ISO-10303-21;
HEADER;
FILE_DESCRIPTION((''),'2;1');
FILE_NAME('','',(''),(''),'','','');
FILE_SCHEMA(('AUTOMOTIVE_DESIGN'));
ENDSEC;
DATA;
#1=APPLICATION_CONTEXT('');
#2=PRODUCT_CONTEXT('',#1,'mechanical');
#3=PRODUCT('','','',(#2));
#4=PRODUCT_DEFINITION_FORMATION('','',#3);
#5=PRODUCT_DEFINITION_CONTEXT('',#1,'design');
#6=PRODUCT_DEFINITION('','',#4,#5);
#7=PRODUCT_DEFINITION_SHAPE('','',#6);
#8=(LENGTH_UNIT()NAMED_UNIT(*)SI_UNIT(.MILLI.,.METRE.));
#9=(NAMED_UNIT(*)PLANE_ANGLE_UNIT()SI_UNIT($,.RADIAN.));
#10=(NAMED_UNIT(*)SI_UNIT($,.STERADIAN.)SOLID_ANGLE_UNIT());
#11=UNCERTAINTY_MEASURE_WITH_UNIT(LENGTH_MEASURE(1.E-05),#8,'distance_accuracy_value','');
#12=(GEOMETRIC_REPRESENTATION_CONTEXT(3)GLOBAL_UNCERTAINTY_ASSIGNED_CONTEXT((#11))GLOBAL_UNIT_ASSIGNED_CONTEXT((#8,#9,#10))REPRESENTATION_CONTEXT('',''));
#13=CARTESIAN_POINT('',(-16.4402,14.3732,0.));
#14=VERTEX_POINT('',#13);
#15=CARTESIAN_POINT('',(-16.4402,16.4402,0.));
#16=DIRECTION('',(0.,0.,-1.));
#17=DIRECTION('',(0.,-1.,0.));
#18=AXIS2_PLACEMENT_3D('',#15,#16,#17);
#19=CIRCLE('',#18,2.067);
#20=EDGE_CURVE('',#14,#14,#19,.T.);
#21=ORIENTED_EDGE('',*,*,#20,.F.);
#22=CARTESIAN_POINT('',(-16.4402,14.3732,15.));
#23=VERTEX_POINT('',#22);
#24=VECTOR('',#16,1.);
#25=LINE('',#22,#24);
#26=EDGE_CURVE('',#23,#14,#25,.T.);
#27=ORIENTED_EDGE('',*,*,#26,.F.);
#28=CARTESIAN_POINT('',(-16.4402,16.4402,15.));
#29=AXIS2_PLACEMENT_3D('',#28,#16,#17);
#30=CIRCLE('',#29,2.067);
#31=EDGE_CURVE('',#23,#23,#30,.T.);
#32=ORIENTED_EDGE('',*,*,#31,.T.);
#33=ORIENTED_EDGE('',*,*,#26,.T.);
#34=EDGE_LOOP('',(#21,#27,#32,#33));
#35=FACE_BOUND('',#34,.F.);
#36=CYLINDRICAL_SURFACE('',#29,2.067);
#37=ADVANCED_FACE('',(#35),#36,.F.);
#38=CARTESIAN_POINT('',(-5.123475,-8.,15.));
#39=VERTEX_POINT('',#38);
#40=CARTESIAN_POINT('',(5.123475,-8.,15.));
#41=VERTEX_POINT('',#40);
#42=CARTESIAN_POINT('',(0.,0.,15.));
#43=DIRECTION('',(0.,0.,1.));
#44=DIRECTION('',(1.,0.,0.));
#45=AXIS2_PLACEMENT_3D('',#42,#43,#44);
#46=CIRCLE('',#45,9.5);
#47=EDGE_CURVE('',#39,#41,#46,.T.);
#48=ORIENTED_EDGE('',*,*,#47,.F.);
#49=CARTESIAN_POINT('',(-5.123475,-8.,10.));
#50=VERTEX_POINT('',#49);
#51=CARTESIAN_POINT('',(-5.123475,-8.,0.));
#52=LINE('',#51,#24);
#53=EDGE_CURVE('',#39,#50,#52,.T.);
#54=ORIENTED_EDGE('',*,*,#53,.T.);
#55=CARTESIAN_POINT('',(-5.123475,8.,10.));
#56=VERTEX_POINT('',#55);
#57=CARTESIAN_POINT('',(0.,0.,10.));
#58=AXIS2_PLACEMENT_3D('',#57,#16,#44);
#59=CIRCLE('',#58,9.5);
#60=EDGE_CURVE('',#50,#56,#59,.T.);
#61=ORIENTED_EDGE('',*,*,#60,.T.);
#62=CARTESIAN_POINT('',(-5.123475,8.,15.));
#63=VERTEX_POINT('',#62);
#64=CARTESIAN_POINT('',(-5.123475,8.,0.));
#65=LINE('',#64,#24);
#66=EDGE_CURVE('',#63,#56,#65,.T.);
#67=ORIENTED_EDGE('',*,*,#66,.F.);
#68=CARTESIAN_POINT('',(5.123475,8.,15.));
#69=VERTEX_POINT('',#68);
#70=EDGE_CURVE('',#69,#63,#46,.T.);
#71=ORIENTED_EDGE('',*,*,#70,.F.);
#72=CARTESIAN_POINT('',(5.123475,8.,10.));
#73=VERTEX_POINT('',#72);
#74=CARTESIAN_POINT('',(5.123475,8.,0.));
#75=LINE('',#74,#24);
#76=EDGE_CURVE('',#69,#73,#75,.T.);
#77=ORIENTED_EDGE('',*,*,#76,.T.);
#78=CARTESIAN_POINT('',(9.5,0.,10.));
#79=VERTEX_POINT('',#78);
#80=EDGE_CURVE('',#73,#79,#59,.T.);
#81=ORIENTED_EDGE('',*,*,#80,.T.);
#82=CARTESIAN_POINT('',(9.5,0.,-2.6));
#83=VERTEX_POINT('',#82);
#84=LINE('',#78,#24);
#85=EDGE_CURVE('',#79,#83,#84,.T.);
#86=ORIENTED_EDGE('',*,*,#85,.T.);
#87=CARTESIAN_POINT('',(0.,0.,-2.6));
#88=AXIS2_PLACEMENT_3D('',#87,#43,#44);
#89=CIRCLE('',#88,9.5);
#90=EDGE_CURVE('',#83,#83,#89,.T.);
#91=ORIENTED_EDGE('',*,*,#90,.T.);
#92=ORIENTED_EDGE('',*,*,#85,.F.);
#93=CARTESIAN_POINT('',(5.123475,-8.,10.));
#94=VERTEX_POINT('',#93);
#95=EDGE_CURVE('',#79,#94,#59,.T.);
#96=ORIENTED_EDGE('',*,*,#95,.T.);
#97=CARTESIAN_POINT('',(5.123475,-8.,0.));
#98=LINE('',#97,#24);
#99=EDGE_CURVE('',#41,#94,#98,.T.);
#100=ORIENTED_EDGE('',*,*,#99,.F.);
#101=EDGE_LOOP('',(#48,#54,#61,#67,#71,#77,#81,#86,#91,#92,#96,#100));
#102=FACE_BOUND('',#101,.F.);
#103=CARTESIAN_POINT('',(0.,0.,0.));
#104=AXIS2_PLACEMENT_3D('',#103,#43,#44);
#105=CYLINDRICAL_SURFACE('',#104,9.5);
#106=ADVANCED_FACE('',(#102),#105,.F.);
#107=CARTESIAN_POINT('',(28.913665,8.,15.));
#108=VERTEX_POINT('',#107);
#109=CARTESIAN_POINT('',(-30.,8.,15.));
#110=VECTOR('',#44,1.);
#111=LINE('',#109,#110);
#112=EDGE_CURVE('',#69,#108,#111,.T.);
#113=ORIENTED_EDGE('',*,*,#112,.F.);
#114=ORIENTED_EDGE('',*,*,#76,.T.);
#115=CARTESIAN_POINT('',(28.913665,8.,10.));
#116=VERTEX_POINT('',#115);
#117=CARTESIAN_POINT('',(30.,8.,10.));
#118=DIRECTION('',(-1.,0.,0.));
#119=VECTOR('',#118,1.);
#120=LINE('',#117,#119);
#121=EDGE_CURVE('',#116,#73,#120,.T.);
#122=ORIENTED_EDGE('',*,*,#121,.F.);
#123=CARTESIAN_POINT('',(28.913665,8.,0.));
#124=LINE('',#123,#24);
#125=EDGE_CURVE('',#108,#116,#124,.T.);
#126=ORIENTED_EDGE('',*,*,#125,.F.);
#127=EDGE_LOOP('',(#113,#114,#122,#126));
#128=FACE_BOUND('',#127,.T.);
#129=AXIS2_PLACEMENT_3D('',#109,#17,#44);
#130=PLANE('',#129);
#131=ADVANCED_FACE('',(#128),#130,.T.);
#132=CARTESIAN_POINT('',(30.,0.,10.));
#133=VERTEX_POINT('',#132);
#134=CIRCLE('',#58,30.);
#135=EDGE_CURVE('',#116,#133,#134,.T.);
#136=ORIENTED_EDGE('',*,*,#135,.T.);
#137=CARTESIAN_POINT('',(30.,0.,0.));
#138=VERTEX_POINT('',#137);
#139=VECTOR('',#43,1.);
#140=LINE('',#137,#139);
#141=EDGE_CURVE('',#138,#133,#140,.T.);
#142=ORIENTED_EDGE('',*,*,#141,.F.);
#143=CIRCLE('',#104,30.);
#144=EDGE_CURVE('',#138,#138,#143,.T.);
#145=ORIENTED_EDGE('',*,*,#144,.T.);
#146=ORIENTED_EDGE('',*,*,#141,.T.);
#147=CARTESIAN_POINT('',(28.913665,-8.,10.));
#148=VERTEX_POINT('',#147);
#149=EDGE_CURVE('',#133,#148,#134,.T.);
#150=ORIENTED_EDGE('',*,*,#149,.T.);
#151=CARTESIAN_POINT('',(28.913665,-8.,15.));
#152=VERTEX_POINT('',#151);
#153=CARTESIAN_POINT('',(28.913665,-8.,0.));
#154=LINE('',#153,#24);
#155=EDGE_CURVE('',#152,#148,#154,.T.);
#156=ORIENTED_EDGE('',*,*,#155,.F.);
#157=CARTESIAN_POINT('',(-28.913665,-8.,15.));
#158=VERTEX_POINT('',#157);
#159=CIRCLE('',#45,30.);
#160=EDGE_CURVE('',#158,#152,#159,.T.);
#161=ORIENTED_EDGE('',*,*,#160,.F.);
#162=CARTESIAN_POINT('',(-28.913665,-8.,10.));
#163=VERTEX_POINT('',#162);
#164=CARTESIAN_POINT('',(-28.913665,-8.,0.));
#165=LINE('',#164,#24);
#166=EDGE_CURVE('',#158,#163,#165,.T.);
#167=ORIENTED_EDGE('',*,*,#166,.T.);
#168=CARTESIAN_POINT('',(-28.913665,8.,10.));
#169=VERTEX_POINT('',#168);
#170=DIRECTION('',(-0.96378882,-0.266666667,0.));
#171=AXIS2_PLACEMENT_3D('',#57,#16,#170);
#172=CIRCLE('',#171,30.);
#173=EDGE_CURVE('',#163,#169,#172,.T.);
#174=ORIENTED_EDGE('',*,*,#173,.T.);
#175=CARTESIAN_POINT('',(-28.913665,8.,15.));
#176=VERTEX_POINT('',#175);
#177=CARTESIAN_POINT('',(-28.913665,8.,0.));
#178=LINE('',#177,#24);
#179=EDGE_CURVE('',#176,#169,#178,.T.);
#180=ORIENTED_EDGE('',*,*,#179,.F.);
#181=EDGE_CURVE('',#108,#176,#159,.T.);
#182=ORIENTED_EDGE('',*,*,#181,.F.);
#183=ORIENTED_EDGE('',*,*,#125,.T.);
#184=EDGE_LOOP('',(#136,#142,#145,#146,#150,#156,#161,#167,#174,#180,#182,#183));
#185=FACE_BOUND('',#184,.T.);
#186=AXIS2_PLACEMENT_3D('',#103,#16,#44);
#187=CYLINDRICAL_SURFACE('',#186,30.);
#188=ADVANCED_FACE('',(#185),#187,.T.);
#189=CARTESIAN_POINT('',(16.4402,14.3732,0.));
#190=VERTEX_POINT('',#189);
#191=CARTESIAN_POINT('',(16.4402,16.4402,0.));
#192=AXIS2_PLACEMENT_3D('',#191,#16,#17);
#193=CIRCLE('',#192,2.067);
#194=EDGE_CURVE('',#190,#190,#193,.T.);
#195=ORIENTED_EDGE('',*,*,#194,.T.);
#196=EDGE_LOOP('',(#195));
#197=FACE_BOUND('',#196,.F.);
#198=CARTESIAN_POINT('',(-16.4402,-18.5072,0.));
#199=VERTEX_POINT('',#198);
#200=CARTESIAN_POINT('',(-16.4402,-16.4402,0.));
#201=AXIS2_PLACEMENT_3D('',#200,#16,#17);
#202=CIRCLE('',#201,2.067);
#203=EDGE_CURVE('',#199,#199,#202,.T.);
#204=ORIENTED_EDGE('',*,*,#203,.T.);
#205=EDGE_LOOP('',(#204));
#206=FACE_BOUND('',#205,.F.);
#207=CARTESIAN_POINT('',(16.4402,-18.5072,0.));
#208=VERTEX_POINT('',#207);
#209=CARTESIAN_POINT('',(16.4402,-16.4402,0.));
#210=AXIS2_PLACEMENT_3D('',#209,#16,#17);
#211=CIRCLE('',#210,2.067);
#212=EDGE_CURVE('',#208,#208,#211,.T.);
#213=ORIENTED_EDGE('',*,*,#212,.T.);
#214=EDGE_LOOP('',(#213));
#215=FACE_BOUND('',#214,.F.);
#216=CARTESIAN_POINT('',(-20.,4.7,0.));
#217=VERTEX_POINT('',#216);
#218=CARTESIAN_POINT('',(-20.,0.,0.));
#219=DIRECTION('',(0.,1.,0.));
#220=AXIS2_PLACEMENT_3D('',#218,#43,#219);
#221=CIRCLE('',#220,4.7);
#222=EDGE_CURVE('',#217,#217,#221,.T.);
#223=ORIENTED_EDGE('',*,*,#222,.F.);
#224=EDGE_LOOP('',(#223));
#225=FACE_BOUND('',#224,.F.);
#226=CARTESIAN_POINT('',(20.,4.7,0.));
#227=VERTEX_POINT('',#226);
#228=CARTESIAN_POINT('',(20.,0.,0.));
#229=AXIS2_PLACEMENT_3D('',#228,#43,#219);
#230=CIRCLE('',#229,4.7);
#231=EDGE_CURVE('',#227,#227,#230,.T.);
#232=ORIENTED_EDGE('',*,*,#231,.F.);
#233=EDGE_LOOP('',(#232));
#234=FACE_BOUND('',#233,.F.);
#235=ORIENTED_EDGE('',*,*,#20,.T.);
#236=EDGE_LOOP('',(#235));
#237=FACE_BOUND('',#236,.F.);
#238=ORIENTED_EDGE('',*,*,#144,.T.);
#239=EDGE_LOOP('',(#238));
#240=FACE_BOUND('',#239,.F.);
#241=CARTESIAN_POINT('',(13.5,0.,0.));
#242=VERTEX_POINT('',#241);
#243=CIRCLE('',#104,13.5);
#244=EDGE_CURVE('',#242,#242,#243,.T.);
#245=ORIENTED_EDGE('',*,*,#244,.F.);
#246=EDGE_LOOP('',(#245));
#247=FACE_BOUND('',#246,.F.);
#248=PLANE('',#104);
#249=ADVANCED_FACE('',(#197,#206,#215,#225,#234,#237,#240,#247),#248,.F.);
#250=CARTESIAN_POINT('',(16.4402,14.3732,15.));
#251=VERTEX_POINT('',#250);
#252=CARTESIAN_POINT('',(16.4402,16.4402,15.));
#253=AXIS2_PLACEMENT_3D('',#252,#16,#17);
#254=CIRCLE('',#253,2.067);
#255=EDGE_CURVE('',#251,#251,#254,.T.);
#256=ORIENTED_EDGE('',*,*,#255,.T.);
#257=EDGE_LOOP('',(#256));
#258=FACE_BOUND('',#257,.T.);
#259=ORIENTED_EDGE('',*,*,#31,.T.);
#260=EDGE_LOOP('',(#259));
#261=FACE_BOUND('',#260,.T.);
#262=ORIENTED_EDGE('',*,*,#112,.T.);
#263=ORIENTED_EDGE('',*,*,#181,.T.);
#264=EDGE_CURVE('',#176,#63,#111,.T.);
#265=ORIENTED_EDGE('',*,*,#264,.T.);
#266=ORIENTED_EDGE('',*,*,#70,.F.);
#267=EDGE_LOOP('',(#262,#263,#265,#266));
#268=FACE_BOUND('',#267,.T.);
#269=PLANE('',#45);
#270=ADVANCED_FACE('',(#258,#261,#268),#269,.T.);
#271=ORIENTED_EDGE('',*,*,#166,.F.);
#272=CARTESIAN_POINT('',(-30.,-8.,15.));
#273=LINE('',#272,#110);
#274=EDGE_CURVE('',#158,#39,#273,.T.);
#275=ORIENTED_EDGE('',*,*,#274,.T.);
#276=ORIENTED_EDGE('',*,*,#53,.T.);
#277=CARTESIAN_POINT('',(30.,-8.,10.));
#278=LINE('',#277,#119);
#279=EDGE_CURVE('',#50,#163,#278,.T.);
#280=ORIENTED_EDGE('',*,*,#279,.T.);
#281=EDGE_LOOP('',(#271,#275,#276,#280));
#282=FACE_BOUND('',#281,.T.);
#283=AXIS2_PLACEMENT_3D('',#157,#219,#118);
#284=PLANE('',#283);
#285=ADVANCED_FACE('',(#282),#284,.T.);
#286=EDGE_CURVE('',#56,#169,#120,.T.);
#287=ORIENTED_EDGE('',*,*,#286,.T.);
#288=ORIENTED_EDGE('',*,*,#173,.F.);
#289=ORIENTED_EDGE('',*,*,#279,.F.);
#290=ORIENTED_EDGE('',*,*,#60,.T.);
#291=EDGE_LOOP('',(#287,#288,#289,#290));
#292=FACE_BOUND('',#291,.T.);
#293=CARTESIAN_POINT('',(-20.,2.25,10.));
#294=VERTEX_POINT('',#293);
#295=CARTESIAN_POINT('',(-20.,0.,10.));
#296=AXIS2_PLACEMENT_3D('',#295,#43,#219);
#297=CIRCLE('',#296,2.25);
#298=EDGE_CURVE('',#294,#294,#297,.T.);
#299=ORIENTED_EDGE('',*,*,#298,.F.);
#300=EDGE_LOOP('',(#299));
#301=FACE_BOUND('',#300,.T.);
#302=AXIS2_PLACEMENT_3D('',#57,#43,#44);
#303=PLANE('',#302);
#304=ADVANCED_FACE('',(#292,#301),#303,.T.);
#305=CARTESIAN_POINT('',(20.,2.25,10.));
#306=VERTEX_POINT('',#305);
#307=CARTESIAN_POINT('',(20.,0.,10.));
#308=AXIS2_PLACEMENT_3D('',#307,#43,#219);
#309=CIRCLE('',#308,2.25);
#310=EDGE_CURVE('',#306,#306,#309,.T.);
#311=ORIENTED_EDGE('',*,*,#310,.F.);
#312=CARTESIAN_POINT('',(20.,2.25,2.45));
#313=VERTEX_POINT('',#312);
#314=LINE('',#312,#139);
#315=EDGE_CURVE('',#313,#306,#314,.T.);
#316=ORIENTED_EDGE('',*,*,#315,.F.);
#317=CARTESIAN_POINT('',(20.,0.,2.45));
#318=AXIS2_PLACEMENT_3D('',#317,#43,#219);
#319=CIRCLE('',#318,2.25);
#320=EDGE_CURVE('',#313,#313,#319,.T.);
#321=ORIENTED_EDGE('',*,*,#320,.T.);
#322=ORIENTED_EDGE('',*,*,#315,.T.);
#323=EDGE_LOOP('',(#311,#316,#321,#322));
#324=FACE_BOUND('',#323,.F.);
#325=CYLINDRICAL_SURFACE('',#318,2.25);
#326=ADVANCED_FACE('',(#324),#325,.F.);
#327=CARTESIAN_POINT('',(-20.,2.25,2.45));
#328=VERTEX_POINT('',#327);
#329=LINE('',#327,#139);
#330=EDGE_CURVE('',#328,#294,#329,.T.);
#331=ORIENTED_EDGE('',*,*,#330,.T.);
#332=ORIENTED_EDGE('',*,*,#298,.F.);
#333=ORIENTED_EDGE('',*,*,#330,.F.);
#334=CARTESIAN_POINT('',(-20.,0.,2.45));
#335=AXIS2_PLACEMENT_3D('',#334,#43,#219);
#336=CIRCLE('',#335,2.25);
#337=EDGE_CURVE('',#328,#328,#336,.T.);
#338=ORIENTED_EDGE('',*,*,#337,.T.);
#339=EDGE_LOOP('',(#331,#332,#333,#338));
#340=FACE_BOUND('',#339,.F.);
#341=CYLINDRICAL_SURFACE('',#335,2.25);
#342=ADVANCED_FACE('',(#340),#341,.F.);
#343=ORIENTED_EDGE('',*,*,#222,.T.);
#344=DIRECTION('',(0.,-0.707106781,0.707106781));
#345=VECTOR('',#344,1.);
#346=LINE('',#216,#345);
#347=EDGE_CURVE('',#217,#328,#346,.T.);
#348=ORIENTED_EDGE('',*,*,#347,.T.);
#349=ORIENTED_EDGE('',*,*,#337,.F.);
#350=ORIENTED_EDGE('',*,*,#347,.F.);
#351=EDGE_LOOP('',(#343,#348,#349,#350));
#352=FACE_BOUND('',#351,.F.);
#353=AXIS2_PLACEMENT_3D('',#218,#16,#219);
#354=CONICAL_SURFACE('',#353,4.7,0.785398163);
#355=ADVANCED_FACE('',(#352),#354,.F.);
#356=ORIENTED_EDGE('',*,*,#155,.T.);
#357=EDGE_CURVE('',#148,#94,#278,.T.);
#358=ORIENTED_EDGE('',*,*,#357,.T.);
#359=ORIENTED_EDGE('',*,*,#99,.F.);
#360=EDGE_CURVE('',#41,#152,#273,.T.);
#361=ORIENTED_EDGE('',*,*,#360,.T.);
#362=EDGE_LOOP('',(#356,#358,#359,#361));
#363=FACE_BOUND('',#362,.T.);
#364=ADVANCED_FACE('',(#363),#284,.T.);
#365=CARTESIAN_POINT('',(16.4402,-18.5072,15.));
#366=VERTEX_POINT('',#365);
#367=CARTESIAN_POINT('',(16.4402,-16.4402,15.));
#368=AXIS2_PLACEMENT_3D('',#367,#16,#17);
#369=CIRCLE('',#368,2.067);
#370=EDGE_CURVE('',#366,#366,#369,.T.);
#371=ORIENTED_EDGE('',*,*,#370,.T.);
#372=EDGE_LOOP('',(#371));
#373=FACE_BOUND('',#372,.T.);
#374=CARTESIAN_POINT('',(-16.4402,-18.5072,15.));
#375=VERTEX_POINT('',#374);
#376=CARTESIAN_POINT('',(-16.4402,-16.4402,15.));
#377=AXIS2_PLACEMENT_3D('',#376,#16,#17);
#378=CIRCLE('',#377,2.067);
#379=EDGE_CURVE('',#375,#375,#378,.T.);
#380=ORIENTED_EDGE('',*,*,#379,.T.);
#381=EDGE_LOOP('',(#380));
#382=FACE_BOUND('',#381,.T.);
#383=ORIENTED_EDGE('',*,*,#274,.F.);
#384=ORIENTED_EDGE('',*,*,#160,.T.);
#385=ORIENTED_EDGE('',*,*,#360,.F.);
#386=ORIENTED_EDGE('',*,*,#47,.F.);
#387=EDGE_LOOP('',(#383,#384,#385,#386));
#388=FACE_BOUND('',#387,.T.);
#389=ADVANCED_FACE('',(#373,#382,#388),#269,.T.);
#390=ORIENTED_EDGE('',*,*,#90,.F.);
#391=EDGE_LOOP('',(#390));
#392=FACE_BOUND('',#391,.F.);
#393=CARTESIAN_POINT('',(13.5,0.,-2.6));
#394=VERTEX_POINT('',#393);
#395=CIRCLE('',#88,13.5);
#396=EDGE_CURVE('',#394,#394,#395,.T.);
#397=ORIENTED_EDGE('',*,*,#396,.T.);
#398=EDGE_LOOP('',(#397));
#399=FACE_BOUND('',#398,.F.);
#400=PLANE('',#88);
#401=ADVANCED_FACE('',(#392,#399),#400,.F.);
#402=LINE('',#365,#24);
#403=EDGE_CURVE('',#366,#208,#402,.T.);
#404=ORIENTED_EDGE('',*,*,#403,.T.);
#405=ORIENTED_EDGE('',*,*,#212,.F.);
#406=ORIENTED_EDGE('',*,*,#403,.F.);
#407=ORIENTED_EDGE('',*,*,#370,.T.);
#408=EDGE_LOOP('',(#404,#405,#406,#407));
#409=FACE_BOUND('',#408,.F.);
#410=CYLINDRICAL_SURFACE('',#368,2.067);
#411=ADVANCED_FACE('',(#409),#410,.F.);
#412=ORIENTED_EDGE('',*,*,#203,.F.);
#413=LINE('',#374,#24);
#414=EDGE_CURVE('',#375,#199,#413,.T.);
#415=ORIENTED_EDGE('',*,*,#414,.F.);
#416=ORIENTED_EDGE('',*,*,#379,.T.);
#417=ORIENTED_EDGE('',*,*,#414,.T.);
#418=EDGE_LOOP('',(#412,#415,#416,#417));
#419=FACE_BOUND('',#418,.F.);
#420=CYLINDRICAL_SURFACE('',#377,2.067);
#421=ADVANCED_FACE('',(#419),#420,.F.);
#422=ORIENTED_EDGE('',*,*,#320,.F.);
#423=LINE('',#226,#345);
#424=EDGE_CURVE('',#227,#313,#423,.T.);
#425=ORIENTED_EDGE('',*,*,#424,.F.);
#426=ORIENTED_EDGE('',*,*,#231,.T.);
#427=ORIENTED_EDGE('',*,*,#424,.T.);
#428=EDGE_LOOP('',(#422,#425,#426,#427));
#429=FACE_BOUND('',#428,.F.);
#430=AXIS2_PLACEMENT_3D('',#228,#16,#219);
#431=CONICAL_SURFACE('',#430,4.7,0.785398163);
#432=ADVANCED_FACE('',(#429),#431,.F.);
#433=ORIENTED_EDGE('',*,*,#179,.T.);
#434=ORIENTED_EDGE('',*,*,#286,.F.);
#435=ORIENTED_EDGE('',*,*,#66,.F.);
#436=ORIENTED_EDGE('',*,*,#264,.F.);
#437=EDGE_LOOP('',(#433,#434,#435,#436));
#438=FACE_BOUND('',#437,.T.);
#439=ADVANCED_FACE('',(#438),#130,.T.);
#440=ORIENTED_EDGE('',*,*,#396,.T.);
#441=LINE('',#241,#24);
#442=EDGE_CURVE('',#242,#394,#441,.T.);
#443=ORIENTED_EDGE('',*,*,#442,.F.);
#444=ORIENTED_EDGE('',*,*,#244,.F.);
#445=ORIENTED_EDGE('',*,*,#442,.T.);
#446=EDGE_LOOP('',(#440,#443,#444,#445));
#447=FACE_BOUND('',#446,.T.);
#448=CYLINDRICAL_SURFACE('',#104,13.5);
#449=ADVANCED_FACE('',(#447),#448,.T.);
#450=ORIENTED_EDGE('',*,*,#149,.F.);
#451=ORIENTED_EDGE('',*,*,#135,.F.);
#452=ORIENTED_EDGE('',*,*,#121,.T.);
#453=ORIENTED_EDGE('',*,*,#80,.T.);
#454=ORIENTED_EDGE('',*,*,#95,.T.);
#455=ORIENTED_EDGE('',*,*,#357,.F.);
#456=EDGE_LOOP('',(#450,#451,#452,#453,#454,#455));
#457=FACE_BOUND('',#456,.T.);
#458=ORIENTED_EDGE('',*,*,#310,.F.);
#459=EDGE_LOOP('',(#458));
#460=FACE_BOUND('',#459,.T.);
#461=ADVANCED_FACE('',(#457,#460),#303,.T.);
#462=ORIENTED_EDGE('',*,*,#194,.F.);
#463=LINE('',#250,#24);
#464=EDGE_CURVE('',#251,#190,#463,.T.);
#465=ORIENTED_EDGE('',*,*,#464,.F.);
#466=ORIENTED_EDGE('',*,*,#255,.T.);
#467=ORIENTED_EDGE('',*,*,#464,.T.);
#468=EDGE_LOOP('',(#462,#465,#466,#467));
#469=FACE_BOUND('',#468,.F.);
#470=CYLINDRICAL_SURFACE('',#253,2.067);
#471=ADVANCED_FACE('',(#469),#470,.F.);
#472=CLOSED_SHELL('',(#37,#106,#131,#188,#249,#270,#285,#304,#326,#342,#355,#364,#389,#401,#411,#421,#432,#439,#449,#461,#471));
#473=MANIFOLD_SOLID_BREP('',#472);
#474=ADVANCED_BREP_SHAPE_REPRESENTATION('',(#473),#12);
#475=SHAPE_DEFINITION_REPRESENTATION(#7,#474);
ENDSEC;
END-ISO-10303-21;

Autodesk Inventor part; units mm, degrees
ref_plane "Arbeitsebene3" through (0, 0, 50) normal (0, 0, 1) x (1, 0, 0)
ref_plane "Arbeitsebene4" through (0, 0, 130) normal (0, 0, 1) x (1, 0, 0)
sketch "Skizze1" plane through (0, 0, 0) normal (0, 0, 1) x (1, 0, 0)
  circle A0 centre (0, 0) radius 30
  circle A1 centre (0, 0) radius 13.5
  circle A2 centre (0, 0) radius 9.5
  circle A3 centre (0, 0) radius 23.25 construction
  line L0 (0, 0) -> (16.4402, 16.4402) construction
  line L1 (0, 0) -> (0, 30) construction
  point P0 (-16.4402, 16.4402)
  point P1 (-16.4402, -16.4402)
  point P2 (16.4402, -16.4402)
  dimension "d3" = 30
  dimension "d4" = 46.5
  dimension "d0" = 4
  dimension "d1" = 27
  dimension "d7" = 360
  dimension "d99" = 45
extrude "Extrusion1" add sketch "Skizze1" along normal blind 15 contours A0 | A1
extrude "Extrusion2" add sketch "Skizze1" against normal blind 2.6 contours A1
sketch "Skizze2" plane through (0, 0, 15) normal (0, 0, 1) x (1, 0, 0)
  point P0 (0, 0)
  point P1 (16.4402, 16.4402)
  point P2 (16.4402, -16.4402)
  point P3 (-16.4402, -16.4402)
  point P4 (-16.4402, 16.4402)
hole "Bohrung1" at (16.4402, 16.4402, 15) at (16.4402, -16.4402, 15) at (-16.4402, -16.4402, 15) at (-16.4402, 16.4402, 15) direction (0, 0, -1) diameter 4.134 end through all thread size "M5x0.8" class "6H" standard "ISO Metric profile"
ref_plane "Arbeitsebene1" through (0, 0, 10) normal (0, 0, 1) x (1, 0, 0)
sketch "Skizze10" plane through (0, 0, 15) normal (0, 0, 1) x (1, 0, 0)
  line L0 (-30, 8) -> (30, 8)
  line L1 (30, 8) -> (30, -8)
  line L2 (30, -8) -> (-30, -8)
  line L3 (-30, -8) -> (-30, 8)
  line L4 (-30, 8) -> (30, -8) construction
  line L5 (30, 8) -> (-30, -8) construction
  circle A0 centre (0, 0) radius 30 projected
  circle A1 centre (-16.4402, 16.4402) radius 2.067 construction
  circle A2 centre (-16.4402, -16.4402) radius 2.067 construction
  line L6 (-20, 0) -> (20, 0) construction
  circle A3 centre (0, 0) radius 30 projected
  line L7 (0, 42) -> (0, -42) construction
  point P0 (-28.9137, 8)
  point P1 (-28.9137, -8)
  point P2 (28.9137, -8)
  point P3 (28.9137, 8)
  point P4 (30, 0)
  point P5 (-30, 0)
  dimension "d81" = 16
  dimension "d82" = 40
extrude "Extrusion7" cut sketch "Skizze10" against normal blind 5 contours L0 A0 L3 | L0 A0 L2 | A0 L2 L3 | L0 L1 A0 | L1 L2 A0
sketch "Skizze11" plane through (0, 0, 0) normal (0, 0, -1) x (-1, 0, 0)
  point P0 (0, 0)
  point P1 (-20, 0)
  point P2 (20, 0)
hole "Bohrung4" at (20, 0, 0) at (-20, 0, 0) direction (0, 0, 1) diameter 4.5 end through all countersink diameter 9.4 countersink angle 90 clearance for "Senkschraube mit Linsenkopf ISO 2010" size "M4" standard "DIN"
sketch "Skizze4" plane through (0, 0, 0) normal (1, 0, 0) x (0, 1, 0)
  line L0 (9.5, -2.6) -> (-9.5, -2.6) construction
  line L1 (0, 192.52) -> (0, -35.12) construction
  line L2 (-9.5, 15) -> (-9.5, -2.6) construction
  line L3 (9.5, 15) -> (9.5, -2.6) construction
  line L4 (-9.5, 15) -> (9.5, 15) construction
  line L5 (-9.5, 2.4) -> (9.5, 2.4)
  line L6 (-9.5, 2.4) -> (-9.5, 15)
  line L7 (-9.5, 15) -> (-20, 15)
  line L8 (-20, 15) -> (-20, 165)
  line L9 (-20, 165) -> (20, 165)
  line L10 (20, 15) -> (9.5, 15)
  line L11 (9.5, 15) -> (9.5, 2.4)
  line L12 (20, 165) -> (20, 15)
  line L13 (0, 2.4) -> (0, 165)
  point P0 (0, 0)
  dimension "d27" = 5
  dimension "d31" = 150
  dimension "d33" = 40
  dimension "MainAxis_Schluesselweite" = 24
  dimension "d46" = 1
  dimension "d52" = 32
  dimension "Flansch_ParralelMech_FlatPart_Width" = 140
sketch "Skizze7" plane through (0, 0, 50) normal (0, 0, 1) x (1, 0, 0)
  line L0 (-12, 16) -> (-12, -16) construction
  line L1 (-12, 15) -> (-3, 15)
  line L2 (-3, 15) -> (-3, 11.425)
  line L3 (-3, 11.425) -> (3, 11.425)
  line L4 (3, 11.425) -> (3, 15)
  line L5 (3, 15) -> (12, 15)
  line L6 (-12, 0) -> (-12, 15)
  line L7 (0, -16) -> (0, 16) construction
  line L8 (12, -16) -> (12, 16) construction
  line L9 (12, 15) -> (12, 0)
  line L10 (-12, 0) -> (12, 0)
  line L11 (-42, 0) -> (42, 0) construction
  point P0 (0, 11.425)
  point P1 (-12, -7.2111)
  point P2 (12, 7.2111)
  dimension "d51" = 9
  dimension "d63" = 30
  dimension "d64" = 22.85
sketch "Skizze8" plane through (12, -16, 160) normal (1, 0, 0) x (0, 0, -1)
  line L0 (30, -26) -> (30, 58) construction
  line L1 (-32.52, 16) -> (195.12, 16) construction
  point P0 (160, 16)
  point P1 (30, 16)
equation "\"d3\" = Flansch_FemalePart_OuterDia"
equation "\"d4\" = Flansch_FemalePart_HoleDia"
equation "\"d1\" = Flansch_Klemmdeckelausnahme_Dia"
equation "\"d33\" = d28"
equation "\"Total_Bearing_Hole_Dist\" = 80"
equation "\"Flansch_FemalePart_OuterDia\" = 30"
equation "\"Flansch_FemalePart_HoleDia\" = 46.5"
equation "\"Flansch_Klemmdeckelausnahme_Dia\" = 27"
equation "\"d28\" = 40"
properties part number "Flansch_FemalePart_MainAxis_HeadConnectorBase_V2" material "Edelstahl"
